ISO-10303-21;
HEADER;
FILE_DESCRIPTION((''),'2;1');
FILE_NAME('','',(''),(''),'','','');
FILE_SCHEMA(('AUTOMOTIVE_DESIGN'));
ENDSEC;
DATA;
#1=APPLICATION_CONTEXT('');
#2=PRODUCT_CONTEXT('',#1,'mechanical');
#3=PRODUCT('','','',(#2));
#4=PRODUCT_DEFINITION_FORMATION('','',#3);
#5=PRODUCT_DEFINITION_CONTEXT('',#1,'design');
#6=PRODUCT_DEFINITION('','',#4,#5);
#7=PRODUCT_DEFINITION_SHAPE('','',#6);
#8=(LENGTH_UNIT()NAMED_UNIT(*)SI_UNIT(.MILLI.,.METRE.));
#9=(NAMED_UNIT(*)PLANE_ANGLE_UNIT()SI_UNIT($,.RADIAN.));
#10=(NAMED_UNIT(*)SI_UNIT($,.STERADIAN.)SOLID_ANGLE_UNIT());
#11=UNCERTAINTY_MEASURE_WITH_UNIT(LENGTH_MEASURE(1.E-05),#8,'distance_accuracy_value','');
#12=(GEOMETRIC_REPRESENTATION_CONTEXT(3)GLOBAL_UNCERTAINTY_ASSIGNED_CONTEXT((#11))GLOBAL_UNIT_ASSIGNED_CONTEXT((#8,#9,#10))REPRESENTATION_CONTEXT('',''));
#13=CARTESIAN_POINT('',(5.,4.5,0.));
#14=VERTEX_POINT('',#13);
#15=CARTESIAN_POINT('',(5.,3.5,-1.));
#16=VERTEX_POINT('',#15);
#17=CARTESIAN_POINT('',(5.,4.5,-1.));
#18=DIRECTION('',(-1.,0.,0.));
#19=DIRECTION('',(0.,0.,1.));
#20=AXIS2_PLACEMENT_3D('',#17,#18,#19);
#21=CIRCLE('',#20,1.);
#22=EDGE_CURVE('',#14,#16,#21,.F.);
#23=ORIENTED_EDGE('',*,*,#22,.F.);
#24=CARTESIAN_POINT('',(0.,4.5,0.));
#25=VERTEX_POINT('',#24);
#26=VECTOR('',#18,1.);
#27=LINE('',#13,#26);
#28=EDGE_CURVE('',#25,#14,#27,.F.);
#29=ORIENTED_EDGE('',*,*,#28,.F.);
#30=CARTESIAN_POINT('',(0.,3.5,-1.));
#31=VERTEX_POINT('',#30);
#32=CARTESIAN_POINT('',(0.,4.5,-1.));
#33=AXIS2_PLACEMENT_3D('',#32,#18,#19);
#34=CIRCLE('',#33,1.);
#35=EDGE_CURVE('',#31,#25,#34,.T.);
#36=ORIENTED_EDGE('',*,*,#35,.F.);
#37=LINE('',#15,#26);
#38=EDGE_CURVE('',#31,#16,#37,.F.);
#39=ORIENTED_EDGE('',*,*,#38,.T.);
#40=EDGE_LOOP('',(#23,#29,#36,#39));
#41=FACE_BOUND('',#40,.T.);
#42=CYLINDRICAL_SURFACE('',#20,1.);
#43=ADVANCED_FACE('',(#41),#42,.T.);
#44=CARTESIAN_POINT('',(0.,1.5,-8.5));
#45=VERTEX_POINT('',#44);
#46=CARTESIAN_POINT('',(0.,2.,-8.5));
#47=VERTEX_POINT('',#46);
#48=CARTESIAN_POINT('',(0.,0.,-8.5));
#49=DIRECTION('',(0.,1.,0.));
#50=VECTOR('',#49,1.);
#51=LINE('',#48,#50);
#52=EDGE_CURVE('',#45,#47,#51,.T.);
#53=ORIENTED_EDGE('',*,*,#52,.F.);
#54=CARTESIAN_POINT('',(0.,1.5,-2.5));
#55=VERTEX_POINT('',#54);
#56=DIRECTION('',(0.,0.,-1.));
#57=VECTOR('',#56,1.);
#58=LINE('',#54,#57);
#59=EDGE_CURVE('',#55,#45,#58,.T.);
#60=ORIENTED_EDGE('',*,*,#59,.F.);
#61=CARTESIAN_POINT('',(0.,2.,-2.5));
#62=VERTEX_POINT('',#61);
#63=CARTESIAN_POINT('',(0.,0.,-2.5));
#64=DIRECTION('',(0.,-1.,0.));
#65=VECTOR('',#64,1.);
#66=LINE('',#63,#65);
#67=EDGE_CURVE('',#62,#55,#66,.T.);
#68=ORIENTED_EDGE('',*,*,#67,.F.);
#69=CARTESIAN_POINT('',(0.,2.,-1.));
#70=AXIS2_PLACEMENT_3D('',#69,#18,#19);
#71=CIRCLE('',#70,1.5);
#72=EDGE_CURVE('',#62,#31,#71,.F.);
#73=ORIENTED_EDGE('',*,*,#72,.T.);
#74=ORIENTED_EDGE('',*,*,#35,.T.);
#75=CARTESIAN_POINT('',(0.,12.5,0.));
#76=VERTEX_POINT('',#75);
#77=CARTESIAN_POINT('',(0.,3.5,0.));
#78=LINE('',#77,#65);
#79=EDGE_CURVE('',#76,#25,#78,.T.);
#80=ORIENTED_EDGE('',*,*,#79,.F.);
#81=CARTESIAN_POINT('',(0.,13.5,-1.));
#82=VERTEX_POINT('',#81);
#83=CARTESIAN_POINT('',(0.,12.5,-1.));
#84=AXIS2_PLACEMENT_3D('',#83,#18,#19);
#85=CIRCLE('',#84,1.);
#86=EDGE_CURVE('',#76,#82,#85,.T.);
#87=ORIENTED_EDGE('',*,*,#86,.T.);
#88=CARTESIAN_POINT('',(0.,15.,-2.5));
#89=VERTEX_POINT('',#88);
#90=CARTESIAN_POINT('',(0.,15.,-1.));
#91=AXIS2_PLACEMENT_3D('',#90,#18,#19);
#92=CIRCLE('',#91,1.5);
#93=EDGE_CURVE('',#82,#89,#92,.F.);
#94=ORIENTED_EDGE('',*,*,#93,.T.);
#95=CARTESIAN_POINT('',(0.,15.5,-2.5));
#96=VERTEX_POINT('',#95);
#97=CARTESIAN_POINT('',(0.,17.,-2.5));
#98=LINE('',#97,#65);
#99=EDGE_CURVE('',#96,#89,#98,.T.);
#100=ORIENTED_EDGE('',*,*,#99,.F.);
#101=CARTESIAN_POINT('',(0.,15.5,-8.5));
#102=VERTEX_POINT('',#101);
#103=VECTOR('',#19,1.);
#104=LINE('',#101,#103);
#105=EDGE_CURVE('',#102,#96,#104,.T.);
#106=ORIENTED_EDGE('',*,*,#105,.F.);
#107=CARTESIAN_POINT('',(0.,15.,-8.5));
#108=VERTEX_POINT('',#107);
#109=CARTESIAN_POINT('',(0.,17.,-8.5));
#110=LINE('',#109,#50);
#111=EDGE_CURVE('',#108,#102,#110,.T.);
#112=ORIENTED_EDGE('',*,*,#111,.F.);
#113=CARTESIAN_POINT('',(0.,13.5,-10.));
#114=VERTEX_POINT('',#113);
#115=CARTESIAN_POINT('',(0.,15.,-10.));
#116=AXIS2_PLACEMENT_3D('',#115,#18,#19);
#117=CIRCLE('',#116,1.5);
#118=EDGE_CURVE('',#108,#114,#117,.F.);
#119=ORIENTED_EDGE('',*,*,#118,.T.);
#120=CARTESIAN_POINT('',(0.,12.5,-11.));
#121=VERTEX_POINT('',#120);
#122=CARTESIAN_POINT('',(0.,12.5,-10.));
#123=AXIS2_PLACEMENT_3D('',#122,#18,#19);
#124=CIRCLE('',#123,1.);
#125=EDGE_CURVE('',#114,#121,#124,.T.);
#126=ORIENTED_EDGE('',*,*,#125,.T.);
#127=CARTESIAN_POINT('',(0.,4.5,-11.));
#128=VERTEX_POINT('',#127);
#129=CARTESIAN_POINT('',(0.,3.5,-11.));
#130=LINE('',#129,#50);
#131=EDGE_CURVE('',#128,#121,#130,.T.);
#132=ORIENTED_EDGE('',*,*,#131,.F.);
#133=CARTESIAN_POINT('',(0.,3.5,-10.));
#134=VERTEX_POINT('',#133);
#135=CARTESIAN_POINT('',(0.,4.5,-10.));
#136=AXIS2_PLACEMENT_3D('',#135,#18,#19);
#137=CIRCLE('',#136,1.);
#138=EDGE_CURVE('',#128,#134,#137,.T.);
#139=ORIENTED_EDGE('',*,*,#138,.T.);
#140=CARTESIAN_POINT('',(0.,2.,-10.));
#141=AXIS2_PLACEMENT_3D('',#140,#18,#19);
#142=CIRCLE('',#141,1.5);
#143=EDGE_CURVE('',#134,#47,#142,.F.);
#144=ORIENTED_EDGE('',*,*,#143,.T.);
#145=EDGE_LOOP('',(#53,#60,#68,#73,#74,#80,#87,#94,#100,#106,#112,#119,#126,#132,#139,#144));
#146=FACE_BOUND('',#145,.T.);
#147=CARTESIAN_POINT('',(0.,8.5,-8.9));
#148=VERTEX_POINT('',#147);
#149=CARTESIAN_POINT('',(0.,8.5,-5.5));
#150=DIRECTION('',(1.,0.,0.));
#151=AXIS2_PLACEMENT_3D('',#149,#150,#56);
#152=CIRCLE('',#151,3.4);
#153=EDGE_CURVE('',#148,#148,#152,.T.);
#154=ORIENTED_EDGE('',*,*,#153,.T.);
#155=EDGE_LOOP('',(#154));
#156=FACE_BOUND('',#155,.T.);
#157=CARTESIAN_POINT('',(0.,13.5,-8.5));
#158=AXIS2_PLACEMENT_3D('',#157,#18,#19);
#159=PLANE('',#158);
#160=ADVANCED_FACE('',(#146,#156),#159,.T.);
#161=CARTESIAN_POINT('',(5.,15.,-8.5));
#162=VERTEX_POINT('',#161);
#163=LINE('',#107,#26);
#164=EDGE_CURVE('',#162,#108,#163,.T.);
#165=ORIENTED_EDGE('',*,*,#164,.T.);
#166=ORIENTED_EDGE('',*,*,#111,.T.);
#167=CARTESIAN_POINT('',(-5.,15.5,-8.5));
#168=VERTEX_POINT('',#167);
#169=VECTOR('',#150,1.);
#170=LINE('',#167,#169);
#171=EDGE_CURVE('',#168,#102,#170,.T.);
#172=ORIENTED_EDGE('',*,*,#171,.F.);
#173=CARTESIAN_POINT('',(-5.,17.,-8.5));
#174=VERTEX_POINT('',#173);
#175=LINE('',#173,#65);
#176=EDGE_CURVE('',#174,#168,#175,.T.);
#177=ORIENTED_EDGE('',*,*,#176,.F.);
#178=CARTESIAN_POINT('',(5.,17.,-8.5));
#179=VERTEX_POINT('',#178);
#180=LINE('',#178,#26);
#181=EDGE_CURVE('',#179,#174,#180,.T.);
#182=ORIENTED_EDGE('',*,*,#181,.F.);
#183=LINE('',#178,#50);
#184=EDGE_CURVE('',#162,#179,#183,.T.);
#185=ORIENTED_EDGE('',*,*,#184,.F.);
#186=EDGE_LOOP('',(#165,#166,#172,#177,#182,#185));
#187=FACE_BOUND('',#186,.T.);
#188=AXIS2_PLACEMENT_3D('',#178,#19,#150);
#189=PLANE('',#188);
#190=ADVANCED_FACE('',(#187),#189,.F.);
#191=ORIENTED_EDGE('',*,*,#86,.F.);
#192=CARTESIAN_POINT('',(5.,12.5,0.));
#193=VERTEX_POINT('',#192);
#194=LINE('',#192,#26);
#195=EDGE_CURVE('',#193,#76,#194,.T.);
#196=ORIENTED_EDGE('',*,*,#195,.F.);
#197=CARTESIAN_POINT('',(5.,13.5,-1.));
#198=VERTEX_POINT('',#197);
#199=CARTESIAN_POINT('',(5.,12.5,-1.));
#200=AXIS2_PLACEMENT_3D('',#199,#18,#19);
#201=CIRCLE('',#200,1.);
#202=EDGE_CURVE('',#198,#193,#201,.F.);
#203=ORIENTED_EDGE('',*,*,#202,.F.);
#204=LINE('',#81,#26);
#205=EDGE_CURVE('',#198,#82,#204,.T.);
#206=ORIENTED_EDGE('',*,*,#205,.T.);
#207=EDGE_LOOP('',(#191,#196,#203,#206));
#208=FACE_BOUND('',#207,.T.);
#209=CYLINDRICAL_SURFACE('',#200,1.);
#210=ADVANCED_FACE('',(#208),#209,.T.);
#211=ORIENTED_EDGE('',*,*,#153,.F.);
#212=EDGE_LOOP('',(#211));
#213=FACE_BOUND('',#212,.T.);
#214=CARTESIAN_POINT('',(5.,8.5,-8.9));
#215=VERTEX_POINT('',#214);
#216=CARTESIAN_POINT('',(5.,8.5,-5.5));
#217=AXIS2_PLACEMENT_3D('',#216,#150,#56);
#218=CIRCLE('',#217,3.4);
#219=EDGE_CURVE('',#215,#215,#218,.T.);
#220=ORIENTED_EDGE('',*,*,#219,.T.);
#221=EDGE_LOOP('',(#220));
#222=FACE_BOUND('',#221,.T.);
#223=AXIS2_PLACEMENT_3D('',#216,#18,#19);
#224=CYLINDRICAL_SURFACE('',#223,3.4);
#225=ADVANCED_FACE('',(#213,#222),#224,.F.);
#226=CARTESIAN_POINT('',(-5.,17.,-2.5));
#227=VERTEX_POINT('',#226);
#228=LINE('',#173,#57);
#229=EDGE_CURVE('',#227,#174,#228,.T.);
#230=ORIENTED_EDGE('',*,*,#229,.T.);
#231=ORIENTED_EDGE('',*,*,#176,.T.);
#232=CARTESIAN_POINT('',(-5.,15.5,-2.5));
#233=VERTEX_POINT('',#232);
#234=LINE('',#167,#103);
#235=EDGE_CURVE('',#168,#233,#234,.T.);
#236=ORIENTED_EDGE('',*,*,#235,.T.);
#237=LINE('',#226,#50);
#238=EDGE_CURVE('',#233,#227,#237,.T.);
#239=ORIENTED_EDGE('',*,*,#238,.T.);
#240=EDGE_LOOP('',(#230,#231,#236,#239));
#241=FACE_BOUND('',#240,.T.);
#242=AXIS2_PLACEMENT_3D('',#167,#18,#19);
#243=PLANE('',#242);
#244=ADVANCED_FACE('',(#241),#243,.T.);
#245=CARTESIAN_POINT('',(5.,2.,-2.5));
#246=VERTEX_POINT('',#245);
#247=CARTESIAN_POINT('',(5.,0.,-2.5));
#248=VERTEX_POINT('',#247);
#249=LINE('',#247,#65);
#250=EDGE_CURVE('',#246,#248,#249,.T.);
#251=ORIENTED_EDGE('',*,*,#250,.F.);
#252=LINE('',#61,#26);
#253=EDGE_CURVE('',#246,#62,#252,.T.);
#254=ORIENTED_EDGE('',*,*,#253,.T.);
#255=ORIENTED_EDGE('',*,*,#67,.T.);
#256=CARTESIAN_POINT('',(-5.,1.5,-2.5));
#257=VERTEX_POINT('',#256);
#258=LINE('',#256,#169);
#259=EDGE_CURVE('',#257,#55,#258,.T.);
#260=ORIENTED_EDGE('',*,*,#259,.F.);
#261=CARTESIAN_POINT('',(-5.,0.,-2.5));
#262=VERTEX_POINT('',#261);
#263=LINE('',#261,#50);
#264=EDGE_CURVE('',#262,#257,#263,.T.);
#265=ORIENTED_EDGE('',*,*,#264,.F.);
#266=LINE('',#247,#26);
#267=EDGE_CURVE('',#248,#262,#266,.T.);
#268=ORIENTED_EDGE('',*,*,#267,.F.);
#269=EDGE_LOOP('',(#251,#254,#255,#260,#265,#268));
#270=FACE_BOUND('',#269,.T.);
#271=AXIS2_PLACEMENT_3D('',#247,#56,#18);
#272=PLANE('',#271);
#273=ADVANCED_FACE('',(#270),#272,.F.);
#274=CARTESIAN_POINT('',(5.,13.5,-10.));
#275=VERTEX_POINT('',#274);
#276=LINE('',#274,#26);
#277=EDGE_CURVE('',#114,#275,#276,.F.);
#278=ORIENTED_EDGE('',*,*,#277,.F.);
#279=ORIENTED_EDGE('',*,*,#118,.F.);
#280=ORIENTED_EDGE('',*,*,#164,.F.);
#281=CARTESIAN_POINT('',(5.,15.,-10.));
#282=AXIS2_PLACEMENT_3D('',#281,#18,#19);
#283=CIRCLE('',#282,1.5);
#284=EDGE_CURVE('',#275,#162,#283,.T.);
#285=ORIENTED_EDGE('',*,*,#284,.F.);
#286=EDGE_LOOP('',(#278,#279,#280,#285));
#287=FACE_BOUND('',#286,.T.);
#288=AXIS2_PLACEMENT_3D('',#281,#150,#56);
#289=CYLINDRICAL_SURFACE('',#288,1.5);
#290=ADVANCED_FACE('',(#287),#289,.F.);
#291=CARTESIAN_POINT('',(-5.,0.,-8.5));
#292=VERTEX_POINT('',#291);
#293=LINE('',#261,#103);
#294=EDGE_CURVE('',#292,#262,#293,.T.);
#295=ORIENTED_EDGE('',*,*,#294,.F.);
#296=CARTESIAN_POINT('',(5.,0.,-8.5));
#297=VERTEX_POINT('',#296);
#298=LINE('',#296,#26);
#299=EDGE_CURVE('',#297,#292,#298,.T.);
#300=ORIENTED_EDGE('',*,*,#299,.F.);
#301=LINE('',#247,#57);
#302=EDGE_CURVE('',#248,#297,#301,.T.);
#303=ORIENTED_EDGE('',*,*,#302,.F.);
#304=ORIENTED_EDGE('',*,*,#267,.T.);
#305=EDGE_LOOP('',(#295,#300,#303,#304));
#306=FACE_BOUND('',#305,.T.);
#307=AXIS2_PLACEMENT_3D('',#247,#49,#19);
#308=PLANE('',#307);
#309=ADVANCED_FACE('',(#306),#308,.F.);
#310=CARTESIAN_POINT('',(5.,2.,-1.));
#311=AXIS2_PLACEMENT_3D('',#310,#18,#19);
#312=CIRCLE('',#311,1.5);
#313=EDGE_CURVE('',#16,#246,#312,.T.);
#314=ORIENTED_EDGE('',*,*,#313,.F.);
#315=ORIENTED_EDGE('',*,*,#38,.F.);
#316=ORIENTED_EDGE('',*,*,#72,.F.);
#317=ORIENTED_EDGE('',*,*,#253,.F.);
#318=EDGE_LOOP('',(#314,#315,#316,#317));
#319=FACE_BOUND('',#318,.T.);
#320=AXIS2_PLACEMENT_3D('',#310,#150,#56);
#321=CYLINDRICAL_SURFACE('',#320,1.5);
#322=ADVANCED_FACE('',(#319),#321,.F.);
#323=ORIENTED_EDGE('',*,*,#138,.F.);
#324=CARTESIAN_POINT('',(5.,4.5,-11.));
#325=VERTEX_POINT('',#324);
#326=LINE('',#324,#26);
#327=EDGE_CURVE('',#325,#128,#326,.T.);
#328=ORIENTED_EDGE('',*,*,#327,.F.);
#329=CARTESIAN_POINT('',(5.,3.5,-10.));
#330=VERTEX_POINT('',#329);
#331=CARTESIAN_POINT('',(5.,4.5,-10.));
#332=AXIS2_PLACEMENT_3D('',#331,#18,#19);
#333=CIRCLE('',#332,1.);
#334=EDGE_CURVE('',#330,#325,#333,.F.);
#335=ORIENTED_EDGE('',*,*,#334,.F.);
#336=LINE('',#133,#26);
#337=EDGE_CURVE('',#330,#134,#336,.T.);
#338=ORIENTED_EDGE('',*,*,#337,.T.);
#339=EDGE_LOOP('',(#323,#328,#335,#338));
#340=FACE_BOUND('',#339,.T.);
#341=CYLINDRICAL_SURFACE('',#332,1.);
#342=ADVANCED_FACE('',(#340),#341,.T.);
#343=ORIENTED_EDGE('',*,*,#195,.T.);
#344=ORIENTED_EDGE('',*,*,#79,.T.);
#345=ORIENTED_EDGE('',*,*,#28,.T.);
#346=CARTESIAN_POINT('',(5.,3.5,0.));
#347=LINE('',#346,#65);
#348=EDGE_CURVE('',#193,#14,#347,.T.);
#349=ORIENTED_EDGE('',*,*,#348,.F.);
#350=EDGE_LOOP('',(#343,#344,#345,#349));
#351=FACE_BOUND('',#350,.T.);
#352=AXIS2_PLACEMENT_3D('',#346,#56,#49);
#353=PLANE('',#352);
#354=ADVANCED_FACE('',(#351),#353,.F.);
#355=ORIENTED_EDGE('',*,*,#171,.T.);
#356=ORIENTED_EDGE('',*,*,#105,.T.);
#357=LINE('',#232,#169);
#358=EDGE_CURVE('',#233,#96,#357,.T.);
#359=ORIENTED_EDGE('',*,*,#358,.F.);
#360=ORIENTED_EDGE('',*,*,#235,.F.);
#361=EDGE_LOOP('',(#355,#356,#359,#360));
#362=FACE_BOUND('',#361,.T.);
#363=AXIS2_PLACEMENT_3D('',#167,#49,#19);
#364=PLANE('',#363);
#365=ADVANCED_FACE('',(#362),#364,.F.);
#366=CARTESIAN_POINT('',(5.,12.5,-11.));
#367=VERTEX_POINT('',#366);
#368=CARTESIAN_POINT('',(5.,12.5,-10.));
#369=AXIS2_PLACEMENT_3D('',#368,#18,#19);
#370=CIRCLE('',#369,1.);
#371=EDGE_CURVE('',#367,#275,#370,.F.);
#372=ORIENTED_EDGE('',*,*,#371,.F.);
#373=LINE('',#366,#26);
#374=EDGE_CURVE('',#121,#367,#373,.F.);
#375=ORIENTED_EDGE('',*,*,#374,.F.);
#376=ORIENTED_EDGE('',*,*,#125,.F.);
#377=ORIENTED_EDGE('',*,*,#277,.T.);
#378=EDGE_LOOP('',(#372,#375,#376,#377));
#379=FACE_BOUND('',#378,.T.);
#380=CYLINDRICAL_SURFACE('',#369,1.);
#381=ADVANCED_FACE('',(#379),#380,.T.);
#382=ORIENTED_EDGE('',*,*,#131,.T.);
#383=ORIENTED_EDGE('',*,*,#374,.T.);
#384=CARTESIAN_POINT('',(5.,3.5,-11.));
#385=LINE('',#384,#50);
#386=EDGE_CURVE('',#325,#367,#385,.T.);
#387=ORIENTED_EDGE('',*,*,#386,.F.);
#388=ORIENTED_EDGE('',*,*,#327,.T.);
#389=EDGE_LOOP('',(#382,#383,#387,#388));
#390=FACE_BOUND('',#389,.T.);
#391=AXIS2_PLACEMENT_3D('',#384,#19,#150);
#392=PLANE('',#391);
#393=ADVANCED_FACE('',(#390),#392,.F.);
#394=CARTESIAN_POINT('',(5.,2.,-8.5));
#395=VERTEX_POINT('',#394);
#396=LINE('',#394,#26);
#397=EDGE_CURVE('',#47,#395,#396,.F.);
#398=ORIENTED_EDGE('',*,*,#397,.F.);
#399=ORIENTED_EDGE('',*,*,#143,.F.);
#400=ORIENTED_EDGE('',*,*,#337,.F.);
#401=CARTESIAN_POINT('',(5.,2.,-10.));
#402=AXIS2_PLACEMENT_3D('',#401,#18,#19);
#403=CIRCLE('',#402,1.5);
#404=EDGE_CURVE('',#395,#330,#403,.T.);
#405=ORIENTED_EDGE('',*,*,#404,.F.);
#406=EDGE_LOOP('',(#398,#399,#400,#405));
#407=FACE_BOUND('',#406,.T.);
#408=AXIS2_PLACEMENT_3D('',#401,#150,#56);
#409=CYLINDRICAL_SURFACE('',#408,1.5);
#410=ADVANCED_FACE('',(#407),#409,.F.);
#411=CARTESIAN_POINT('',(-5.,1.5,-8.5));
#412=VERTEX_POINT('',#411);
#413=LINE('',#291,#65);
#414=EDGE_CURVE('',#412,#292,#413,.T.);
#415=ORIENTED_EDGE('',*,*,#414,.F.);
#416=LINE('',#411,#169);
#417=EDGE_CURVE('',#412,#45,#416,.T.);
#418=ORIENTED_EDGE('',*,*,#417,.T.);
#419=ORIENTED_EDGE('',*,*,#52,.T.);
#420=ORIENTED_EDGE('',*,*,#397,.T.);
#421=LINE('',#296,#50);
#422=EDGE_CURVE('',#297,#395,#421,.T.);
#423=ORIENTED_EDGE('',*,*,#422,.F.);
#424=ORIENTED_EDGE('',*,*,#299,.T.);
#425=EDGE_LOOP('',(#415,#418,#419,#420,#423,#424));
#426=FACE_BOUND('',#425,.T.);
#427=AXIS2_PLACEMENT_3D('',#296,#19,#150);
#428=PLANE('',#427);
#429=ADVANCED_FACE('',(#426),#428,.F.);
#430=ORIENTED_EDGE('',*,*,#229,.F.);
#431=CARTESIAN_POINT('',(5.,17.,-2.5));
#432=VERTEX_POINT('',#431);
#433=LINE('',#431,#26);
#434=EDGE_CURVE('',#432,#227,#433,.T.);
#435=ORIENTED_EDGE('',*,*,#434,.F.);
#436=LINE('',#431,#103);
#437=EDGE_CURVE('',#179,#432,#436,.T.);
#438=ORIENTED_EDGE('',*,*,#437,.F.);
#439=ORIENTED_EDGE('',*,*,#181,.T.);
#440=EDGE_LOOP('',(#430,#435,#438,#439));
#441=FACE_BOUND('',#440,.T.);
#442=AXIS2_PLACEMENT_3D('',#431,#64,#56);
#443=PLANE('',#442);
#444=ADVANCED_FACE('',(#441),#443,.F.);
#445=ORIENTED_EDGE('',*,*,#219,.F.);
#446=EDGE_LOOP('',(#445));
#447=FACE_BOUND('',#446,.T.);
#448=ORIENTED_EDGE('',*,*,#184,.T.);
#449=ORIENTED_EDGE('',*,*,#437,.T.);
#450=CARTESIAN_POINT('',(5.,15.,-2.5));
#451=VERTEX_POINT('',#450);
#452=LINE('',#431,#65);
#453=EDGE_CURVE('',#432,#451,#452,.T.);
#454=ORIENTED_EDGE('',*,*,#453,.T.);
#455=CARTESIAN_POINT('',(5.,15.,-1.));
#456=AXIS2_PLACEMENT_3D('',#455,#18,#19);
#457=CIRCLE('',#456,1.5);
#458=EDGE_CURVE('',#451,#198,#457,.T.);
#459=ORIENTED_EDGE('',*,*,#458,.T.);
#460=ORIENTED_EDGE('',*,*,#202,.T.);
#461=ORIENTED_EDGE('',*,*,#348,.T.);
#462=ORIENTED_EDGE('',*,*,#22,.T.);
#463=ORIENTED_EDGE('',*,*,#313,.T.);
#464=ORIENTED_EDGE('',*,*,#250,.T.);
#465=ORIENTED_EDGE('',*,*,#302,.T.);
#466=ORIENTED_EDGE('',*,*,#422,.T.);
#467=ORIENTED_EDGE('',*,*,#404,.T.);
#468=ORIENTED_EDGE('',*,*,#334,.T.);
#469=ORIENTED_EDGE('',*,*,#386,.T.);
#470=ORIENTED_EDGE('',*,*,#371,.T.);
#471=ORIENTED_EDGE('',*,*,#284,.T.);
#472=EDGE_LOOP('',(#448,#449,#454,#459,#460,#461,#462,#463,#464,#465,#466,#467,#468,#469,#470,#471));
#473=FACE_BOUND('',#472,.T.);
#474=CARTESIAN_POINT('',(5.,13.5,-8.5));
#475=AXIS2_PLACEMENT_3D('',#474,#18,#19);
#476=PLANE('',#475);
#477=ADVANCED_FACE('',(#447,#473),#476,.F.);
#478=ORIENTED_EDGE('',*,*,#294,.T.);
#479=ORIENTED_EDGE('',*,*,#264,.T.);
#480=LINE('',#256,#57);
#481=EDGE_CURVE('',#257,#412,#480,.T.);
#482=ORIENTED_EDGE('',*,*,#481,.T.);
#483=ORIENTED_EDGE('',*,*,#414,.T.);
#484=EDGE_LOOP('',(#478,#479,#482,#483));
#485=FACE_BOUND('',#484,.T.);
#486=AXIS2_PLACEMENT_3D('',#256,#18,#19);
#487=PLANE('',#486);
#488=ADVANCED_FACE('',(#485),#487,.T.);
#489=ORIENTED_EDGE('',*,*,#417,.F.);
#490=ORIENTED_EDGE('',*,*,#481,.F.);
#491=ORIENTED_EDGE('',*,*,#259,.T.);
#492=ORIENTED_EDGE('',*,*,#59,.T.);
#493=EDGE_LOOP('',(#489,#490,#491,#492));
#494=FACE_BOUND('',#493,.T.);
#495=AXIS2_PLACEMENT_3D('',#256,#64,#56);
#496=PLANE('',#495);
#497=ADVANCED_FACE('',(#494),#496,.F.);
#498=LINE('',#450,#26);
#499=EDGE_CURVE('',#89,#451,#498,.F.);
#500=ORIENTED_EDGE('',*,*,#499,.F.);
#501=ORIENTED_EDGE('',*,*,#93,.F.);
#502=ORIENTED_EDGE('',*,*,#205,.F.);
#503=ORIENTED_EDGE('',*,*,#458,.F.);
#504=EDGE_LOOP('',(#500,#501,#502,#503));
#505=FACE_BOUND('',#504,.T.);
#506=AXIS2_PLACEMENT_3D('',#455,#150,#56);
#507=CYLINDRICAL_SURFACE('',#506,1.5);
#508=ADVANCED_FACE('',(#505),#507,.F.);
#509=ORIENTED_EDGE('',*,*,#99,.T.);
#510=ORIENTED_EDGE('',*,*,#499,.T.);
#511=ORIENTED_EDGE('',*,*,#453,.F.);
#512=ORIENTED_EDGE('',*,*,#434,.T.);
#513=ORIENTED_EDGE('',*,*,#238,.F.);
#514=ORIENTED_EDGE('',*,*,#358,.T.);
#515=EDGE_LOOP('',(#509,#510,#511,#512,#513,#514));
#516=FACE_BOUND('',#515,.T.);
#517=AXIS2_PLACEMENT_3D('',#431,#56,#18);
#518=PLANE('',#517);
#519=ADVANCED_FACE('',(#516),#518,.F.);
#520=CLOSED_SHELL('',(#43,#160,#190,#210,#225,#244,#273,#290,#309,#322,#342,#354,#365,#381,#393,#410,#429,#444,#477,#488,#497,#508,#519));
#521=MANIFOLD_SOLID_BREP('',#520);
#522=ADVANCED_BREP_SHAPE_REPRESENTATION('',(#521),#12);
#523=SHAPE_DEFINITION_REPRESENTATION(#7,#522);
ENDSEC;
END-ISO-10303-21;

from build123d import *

# Parameters (mm, degrees)
SKETCH1_R           = 3.4
BOSS_EXTRUDE1_DEPTH = 5
SKETCH3_W           = 6
SKETCH3_H           = 1.5
BOSS_EXTRUDE2_DEPTH = 5
FILLET2_R           = 1.5
FILLET3_R           = 1


with BuildPart() as part:
    # Sketch1 → Boss-Extrude1 (new body)
    with BuildSketch(Plane(origin=(0, 0, 0), x_dir=(0, 0, -1), z_dir=(1, 0, 0))):
        Polygon((2.5, 0), (8.5, 0), (8.5, 3.5), (11, 3.5), (11, 13.5), (8.5, 13.5), (8.5, 17), (2.5, 17), (2.5, 13.5), (0, 13.5), (0, 3.5), (2.5, 3.5), align=None)
        with Locations((5.5, 8.5)):
            Circle(SKETCH1_R, mode=Mode.SUBTRACT)
    extrude(amount=BOSS_EXTRUDE1_DEPTH)

    # Sketch3 → Boss-Extrude2 (add)
    with BuildSketch(Plane.ZY):
        with Locations((-5.5, 16.25)):
            Rectangle(SKETCH3_W, SKETCH3_H)
        with Locations((-5.5, 0.75)):
            Rectangle(SKETCH3_W, SKETCH3_H)
    extrude(amount=BOSS_EXTRUDE2_DEPTH)

    # Fillet2
    fillet2_edges = [part.edges().sort_by_distance(p)[0] for p in [
        (2.5, 13.5, -8.5),
        (2.5, 13.5, -2.5),
        (2.5, 3.5, -2.5),
        (2.5, 3.5, -8.5),
    ]]
    fillet(fillet2_edges, radius=FILLET2_R)

    # Fillet3
    fillet3_edges = [part.edges().sort_by_distance(p)[0] for p in [
        (2.5, 3.5, -11),
        (2.5, 3.5, 0),
        (2.5, 13.5, 0),
        (2.5, 13.5, -11),
    ]]
    fillet(fillet3_edges, radius=FILLET3_R - 0.0001)  # a hair under: the kernel refuses the full size


solid = part.part
